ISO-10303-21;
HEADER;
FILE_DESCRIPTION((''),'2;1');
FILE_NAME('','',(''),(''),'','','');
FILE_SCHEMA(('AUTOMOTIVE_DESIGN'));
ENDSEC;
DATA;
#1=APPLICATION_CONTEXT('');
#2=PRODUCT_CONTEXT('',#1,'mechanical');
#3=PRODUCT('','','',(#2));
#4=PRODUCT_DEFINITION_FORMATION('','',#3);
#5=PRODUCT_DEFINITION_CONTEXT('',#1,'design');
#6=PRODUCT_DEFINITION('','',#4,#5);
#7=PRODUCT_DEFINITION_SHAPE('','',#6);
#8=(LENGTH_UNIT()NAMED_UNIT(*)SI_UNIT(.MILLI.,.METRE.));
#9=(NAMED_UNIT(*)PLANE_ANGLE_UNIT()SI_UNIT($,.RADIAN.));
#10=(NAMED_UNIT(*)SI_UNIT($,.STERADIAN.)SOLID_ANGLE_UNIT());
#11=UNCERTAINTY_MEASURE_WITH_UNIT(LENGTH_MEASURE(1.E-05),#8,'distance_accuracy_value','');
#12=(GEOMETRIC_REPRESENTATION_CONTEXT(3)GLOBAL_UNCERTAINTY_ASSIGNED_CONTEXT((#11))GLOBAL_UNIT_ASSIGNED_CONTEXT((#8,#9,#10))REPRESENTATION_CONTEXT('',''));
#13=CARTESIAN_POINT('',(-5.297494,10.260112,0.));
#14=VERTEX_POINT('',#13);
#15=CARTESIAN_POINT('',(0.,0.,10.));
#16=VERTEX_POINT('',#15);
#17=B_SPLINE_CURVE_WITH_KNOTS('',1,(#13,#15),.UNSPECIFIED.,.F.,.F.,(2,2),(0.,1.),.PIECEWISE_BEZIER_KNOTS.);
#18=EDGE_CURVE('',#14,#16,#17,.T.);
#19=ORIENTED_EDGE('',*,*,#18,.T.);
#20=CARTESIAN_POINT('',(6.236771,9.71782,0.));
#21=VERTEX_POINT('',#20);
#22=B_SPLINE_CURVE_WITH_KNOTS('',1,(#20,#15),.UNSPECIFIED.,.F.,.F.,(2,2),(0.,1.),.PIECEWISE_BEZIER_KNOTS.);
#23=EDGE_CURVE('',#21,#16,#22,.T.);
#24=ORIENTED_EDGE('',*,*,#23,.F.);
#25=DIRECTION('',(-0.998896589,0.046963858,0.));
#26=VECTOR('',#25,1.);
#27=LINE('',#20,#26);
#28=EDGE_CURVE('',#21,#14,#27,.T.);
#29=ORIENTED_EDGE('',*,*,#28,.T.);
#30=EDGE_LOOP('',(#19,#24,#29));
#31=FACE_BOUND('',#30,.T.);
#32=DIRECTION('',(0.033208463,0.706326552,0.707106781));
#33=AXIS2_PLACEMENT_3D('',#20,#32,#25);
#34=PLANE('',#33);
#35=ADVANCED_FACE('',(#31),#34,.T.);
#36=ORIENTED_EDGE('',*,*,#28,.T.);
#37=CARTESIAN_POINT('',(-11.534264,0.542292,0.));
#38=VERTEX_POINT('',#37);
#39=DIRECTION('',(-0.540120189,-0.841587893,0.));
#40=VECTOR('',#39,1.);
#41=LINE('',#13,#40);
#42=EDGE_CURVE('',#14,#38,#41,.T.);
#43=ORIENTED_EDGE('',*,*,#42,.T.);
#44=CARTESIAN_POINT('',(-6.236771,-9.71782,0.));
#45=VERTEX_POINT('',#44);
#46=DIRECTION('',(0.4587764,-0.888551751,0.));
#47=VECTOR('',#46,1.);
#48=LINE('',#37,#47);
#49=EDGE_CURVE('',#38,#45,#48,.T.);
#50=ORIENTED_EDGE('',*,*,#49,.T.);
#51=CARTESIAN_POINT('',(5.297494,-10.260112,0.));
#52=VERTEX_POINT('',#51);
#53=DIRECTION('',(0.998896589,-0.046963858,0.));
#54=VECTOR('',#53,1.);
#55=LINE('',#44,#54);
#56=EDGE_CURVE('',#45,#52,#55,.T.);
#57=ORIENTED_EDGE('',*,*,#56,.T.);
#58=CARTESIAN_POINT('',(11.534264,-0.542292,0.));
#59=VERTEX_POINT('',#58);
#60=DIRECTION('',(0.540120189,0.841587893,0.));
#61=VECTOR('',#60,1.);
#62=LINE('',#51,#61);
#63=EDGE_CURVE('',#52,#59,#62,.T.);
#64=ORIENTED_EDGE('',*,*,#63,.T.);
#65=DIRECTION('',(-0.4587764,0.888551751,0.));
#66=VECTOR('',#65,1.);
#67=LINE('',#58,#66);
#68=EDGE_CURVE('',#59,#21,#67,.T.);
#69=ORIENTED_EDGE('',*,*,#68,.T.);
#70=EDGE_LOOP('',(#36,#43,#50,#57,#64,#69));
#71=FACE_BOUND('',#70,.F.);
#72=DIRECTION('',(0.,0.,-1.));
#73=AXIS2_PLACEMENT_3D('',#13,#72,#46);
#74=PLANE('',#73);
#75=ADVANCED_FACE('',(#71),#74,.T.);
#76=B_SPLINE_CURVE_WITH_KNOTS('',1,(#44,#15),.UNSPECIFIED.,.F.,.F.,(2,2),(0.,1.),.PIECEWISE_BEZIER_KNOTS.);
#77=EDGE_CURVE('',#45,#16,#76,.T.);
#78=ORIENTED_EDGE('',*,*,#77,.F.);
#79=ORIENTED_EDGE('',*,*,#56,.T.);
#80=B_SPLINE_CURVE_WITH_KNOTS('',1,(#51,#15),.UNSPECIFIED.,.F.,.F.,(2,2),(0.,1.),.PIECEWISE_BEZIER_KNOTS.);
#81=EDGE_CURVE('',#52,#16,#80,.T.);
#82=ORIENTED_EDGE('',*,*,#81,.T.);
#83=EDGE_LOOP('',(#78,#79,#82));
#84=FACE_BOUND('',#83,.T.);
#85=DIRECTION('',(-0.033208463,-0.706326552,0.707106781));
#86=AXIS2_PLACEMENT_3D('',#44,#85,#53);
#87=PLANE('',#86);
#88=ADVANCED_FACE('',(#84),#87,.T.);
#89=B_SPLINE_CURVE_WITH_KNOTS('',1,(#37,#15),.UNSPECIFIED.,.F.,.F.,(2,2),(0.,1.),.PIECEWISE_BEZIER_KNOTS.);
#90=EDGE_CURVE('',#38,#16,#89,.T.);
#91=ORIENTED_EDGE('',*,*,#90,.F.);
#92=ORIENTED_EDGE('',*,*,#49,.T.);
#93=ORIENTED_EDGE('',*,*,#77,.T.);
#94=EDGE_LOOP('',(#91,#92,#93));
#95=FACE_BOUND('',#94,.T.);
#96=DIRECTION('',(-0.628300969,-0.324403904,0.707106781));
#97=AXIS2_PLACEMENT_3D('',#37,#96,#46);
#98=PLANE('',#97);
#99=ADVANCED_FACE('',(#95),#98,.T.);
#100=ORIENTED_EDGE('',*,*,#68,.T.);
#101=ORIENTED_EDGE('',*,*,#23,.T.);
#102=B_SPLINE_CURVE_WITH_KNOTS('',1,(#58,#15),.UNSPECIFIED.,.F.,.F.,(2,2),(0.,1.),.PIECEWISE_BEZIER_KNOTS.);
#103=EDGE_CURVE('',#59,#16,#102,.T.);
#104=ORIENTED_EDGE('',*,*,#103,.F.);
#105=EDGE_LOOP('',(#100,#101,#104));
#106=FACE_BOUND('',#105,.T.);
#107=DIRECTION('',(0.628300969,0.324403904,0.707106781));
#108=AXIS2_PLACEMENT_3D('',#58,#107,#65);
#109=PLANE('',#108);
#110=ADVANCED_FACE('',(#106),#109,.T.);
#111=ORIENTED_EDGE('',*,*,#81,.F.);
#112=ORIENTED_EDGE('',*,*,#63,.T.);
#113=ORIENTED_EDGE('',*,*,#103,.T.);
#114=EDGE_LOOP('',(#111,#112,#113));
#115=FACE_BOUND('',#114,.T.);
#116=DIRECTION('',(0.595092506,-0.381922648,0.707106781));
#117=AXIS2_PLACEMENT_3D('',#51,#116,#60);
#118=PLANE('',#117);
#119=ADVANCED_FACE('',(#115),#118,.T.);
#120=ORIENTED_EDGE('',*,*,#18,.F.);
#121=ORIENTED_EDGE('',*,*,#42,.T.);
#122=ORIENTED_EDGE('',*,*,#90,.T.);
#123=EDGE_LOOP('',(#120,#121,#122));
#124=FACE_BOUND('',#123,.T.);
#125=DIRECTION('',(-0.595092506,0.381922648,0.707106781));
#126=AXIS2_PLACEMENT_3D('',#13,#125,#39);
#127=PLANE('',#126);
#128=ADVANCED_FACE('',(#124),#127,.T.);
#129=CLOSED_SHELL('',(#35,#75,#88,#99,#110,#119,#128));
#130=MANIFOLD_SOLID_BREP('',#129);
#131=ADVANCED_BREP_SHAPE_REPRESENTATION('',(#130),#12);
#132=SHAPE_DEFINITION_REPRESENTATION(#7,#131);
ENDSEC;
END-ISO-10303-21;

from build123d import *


with BuildPart() as f3:
    # F0 (on Top) → F3 section 0
    with BuildSketch(Plane.XY, mode=Mode.PRIVATE) as f3_s0:
        Polygon((-5.2974935645, 10.2601118545), (-11.5342642939, 0.542291924), (-6.2367707294, -9.7178199305), (5.2974935645, -10.2601118545), (11.5342642939, -0.542291924), (6.2367707294, 9.7178199305), align=None)
    loft([f3_s0.sketch, Vertex(0, 0, 10)])


solid = f3.part
